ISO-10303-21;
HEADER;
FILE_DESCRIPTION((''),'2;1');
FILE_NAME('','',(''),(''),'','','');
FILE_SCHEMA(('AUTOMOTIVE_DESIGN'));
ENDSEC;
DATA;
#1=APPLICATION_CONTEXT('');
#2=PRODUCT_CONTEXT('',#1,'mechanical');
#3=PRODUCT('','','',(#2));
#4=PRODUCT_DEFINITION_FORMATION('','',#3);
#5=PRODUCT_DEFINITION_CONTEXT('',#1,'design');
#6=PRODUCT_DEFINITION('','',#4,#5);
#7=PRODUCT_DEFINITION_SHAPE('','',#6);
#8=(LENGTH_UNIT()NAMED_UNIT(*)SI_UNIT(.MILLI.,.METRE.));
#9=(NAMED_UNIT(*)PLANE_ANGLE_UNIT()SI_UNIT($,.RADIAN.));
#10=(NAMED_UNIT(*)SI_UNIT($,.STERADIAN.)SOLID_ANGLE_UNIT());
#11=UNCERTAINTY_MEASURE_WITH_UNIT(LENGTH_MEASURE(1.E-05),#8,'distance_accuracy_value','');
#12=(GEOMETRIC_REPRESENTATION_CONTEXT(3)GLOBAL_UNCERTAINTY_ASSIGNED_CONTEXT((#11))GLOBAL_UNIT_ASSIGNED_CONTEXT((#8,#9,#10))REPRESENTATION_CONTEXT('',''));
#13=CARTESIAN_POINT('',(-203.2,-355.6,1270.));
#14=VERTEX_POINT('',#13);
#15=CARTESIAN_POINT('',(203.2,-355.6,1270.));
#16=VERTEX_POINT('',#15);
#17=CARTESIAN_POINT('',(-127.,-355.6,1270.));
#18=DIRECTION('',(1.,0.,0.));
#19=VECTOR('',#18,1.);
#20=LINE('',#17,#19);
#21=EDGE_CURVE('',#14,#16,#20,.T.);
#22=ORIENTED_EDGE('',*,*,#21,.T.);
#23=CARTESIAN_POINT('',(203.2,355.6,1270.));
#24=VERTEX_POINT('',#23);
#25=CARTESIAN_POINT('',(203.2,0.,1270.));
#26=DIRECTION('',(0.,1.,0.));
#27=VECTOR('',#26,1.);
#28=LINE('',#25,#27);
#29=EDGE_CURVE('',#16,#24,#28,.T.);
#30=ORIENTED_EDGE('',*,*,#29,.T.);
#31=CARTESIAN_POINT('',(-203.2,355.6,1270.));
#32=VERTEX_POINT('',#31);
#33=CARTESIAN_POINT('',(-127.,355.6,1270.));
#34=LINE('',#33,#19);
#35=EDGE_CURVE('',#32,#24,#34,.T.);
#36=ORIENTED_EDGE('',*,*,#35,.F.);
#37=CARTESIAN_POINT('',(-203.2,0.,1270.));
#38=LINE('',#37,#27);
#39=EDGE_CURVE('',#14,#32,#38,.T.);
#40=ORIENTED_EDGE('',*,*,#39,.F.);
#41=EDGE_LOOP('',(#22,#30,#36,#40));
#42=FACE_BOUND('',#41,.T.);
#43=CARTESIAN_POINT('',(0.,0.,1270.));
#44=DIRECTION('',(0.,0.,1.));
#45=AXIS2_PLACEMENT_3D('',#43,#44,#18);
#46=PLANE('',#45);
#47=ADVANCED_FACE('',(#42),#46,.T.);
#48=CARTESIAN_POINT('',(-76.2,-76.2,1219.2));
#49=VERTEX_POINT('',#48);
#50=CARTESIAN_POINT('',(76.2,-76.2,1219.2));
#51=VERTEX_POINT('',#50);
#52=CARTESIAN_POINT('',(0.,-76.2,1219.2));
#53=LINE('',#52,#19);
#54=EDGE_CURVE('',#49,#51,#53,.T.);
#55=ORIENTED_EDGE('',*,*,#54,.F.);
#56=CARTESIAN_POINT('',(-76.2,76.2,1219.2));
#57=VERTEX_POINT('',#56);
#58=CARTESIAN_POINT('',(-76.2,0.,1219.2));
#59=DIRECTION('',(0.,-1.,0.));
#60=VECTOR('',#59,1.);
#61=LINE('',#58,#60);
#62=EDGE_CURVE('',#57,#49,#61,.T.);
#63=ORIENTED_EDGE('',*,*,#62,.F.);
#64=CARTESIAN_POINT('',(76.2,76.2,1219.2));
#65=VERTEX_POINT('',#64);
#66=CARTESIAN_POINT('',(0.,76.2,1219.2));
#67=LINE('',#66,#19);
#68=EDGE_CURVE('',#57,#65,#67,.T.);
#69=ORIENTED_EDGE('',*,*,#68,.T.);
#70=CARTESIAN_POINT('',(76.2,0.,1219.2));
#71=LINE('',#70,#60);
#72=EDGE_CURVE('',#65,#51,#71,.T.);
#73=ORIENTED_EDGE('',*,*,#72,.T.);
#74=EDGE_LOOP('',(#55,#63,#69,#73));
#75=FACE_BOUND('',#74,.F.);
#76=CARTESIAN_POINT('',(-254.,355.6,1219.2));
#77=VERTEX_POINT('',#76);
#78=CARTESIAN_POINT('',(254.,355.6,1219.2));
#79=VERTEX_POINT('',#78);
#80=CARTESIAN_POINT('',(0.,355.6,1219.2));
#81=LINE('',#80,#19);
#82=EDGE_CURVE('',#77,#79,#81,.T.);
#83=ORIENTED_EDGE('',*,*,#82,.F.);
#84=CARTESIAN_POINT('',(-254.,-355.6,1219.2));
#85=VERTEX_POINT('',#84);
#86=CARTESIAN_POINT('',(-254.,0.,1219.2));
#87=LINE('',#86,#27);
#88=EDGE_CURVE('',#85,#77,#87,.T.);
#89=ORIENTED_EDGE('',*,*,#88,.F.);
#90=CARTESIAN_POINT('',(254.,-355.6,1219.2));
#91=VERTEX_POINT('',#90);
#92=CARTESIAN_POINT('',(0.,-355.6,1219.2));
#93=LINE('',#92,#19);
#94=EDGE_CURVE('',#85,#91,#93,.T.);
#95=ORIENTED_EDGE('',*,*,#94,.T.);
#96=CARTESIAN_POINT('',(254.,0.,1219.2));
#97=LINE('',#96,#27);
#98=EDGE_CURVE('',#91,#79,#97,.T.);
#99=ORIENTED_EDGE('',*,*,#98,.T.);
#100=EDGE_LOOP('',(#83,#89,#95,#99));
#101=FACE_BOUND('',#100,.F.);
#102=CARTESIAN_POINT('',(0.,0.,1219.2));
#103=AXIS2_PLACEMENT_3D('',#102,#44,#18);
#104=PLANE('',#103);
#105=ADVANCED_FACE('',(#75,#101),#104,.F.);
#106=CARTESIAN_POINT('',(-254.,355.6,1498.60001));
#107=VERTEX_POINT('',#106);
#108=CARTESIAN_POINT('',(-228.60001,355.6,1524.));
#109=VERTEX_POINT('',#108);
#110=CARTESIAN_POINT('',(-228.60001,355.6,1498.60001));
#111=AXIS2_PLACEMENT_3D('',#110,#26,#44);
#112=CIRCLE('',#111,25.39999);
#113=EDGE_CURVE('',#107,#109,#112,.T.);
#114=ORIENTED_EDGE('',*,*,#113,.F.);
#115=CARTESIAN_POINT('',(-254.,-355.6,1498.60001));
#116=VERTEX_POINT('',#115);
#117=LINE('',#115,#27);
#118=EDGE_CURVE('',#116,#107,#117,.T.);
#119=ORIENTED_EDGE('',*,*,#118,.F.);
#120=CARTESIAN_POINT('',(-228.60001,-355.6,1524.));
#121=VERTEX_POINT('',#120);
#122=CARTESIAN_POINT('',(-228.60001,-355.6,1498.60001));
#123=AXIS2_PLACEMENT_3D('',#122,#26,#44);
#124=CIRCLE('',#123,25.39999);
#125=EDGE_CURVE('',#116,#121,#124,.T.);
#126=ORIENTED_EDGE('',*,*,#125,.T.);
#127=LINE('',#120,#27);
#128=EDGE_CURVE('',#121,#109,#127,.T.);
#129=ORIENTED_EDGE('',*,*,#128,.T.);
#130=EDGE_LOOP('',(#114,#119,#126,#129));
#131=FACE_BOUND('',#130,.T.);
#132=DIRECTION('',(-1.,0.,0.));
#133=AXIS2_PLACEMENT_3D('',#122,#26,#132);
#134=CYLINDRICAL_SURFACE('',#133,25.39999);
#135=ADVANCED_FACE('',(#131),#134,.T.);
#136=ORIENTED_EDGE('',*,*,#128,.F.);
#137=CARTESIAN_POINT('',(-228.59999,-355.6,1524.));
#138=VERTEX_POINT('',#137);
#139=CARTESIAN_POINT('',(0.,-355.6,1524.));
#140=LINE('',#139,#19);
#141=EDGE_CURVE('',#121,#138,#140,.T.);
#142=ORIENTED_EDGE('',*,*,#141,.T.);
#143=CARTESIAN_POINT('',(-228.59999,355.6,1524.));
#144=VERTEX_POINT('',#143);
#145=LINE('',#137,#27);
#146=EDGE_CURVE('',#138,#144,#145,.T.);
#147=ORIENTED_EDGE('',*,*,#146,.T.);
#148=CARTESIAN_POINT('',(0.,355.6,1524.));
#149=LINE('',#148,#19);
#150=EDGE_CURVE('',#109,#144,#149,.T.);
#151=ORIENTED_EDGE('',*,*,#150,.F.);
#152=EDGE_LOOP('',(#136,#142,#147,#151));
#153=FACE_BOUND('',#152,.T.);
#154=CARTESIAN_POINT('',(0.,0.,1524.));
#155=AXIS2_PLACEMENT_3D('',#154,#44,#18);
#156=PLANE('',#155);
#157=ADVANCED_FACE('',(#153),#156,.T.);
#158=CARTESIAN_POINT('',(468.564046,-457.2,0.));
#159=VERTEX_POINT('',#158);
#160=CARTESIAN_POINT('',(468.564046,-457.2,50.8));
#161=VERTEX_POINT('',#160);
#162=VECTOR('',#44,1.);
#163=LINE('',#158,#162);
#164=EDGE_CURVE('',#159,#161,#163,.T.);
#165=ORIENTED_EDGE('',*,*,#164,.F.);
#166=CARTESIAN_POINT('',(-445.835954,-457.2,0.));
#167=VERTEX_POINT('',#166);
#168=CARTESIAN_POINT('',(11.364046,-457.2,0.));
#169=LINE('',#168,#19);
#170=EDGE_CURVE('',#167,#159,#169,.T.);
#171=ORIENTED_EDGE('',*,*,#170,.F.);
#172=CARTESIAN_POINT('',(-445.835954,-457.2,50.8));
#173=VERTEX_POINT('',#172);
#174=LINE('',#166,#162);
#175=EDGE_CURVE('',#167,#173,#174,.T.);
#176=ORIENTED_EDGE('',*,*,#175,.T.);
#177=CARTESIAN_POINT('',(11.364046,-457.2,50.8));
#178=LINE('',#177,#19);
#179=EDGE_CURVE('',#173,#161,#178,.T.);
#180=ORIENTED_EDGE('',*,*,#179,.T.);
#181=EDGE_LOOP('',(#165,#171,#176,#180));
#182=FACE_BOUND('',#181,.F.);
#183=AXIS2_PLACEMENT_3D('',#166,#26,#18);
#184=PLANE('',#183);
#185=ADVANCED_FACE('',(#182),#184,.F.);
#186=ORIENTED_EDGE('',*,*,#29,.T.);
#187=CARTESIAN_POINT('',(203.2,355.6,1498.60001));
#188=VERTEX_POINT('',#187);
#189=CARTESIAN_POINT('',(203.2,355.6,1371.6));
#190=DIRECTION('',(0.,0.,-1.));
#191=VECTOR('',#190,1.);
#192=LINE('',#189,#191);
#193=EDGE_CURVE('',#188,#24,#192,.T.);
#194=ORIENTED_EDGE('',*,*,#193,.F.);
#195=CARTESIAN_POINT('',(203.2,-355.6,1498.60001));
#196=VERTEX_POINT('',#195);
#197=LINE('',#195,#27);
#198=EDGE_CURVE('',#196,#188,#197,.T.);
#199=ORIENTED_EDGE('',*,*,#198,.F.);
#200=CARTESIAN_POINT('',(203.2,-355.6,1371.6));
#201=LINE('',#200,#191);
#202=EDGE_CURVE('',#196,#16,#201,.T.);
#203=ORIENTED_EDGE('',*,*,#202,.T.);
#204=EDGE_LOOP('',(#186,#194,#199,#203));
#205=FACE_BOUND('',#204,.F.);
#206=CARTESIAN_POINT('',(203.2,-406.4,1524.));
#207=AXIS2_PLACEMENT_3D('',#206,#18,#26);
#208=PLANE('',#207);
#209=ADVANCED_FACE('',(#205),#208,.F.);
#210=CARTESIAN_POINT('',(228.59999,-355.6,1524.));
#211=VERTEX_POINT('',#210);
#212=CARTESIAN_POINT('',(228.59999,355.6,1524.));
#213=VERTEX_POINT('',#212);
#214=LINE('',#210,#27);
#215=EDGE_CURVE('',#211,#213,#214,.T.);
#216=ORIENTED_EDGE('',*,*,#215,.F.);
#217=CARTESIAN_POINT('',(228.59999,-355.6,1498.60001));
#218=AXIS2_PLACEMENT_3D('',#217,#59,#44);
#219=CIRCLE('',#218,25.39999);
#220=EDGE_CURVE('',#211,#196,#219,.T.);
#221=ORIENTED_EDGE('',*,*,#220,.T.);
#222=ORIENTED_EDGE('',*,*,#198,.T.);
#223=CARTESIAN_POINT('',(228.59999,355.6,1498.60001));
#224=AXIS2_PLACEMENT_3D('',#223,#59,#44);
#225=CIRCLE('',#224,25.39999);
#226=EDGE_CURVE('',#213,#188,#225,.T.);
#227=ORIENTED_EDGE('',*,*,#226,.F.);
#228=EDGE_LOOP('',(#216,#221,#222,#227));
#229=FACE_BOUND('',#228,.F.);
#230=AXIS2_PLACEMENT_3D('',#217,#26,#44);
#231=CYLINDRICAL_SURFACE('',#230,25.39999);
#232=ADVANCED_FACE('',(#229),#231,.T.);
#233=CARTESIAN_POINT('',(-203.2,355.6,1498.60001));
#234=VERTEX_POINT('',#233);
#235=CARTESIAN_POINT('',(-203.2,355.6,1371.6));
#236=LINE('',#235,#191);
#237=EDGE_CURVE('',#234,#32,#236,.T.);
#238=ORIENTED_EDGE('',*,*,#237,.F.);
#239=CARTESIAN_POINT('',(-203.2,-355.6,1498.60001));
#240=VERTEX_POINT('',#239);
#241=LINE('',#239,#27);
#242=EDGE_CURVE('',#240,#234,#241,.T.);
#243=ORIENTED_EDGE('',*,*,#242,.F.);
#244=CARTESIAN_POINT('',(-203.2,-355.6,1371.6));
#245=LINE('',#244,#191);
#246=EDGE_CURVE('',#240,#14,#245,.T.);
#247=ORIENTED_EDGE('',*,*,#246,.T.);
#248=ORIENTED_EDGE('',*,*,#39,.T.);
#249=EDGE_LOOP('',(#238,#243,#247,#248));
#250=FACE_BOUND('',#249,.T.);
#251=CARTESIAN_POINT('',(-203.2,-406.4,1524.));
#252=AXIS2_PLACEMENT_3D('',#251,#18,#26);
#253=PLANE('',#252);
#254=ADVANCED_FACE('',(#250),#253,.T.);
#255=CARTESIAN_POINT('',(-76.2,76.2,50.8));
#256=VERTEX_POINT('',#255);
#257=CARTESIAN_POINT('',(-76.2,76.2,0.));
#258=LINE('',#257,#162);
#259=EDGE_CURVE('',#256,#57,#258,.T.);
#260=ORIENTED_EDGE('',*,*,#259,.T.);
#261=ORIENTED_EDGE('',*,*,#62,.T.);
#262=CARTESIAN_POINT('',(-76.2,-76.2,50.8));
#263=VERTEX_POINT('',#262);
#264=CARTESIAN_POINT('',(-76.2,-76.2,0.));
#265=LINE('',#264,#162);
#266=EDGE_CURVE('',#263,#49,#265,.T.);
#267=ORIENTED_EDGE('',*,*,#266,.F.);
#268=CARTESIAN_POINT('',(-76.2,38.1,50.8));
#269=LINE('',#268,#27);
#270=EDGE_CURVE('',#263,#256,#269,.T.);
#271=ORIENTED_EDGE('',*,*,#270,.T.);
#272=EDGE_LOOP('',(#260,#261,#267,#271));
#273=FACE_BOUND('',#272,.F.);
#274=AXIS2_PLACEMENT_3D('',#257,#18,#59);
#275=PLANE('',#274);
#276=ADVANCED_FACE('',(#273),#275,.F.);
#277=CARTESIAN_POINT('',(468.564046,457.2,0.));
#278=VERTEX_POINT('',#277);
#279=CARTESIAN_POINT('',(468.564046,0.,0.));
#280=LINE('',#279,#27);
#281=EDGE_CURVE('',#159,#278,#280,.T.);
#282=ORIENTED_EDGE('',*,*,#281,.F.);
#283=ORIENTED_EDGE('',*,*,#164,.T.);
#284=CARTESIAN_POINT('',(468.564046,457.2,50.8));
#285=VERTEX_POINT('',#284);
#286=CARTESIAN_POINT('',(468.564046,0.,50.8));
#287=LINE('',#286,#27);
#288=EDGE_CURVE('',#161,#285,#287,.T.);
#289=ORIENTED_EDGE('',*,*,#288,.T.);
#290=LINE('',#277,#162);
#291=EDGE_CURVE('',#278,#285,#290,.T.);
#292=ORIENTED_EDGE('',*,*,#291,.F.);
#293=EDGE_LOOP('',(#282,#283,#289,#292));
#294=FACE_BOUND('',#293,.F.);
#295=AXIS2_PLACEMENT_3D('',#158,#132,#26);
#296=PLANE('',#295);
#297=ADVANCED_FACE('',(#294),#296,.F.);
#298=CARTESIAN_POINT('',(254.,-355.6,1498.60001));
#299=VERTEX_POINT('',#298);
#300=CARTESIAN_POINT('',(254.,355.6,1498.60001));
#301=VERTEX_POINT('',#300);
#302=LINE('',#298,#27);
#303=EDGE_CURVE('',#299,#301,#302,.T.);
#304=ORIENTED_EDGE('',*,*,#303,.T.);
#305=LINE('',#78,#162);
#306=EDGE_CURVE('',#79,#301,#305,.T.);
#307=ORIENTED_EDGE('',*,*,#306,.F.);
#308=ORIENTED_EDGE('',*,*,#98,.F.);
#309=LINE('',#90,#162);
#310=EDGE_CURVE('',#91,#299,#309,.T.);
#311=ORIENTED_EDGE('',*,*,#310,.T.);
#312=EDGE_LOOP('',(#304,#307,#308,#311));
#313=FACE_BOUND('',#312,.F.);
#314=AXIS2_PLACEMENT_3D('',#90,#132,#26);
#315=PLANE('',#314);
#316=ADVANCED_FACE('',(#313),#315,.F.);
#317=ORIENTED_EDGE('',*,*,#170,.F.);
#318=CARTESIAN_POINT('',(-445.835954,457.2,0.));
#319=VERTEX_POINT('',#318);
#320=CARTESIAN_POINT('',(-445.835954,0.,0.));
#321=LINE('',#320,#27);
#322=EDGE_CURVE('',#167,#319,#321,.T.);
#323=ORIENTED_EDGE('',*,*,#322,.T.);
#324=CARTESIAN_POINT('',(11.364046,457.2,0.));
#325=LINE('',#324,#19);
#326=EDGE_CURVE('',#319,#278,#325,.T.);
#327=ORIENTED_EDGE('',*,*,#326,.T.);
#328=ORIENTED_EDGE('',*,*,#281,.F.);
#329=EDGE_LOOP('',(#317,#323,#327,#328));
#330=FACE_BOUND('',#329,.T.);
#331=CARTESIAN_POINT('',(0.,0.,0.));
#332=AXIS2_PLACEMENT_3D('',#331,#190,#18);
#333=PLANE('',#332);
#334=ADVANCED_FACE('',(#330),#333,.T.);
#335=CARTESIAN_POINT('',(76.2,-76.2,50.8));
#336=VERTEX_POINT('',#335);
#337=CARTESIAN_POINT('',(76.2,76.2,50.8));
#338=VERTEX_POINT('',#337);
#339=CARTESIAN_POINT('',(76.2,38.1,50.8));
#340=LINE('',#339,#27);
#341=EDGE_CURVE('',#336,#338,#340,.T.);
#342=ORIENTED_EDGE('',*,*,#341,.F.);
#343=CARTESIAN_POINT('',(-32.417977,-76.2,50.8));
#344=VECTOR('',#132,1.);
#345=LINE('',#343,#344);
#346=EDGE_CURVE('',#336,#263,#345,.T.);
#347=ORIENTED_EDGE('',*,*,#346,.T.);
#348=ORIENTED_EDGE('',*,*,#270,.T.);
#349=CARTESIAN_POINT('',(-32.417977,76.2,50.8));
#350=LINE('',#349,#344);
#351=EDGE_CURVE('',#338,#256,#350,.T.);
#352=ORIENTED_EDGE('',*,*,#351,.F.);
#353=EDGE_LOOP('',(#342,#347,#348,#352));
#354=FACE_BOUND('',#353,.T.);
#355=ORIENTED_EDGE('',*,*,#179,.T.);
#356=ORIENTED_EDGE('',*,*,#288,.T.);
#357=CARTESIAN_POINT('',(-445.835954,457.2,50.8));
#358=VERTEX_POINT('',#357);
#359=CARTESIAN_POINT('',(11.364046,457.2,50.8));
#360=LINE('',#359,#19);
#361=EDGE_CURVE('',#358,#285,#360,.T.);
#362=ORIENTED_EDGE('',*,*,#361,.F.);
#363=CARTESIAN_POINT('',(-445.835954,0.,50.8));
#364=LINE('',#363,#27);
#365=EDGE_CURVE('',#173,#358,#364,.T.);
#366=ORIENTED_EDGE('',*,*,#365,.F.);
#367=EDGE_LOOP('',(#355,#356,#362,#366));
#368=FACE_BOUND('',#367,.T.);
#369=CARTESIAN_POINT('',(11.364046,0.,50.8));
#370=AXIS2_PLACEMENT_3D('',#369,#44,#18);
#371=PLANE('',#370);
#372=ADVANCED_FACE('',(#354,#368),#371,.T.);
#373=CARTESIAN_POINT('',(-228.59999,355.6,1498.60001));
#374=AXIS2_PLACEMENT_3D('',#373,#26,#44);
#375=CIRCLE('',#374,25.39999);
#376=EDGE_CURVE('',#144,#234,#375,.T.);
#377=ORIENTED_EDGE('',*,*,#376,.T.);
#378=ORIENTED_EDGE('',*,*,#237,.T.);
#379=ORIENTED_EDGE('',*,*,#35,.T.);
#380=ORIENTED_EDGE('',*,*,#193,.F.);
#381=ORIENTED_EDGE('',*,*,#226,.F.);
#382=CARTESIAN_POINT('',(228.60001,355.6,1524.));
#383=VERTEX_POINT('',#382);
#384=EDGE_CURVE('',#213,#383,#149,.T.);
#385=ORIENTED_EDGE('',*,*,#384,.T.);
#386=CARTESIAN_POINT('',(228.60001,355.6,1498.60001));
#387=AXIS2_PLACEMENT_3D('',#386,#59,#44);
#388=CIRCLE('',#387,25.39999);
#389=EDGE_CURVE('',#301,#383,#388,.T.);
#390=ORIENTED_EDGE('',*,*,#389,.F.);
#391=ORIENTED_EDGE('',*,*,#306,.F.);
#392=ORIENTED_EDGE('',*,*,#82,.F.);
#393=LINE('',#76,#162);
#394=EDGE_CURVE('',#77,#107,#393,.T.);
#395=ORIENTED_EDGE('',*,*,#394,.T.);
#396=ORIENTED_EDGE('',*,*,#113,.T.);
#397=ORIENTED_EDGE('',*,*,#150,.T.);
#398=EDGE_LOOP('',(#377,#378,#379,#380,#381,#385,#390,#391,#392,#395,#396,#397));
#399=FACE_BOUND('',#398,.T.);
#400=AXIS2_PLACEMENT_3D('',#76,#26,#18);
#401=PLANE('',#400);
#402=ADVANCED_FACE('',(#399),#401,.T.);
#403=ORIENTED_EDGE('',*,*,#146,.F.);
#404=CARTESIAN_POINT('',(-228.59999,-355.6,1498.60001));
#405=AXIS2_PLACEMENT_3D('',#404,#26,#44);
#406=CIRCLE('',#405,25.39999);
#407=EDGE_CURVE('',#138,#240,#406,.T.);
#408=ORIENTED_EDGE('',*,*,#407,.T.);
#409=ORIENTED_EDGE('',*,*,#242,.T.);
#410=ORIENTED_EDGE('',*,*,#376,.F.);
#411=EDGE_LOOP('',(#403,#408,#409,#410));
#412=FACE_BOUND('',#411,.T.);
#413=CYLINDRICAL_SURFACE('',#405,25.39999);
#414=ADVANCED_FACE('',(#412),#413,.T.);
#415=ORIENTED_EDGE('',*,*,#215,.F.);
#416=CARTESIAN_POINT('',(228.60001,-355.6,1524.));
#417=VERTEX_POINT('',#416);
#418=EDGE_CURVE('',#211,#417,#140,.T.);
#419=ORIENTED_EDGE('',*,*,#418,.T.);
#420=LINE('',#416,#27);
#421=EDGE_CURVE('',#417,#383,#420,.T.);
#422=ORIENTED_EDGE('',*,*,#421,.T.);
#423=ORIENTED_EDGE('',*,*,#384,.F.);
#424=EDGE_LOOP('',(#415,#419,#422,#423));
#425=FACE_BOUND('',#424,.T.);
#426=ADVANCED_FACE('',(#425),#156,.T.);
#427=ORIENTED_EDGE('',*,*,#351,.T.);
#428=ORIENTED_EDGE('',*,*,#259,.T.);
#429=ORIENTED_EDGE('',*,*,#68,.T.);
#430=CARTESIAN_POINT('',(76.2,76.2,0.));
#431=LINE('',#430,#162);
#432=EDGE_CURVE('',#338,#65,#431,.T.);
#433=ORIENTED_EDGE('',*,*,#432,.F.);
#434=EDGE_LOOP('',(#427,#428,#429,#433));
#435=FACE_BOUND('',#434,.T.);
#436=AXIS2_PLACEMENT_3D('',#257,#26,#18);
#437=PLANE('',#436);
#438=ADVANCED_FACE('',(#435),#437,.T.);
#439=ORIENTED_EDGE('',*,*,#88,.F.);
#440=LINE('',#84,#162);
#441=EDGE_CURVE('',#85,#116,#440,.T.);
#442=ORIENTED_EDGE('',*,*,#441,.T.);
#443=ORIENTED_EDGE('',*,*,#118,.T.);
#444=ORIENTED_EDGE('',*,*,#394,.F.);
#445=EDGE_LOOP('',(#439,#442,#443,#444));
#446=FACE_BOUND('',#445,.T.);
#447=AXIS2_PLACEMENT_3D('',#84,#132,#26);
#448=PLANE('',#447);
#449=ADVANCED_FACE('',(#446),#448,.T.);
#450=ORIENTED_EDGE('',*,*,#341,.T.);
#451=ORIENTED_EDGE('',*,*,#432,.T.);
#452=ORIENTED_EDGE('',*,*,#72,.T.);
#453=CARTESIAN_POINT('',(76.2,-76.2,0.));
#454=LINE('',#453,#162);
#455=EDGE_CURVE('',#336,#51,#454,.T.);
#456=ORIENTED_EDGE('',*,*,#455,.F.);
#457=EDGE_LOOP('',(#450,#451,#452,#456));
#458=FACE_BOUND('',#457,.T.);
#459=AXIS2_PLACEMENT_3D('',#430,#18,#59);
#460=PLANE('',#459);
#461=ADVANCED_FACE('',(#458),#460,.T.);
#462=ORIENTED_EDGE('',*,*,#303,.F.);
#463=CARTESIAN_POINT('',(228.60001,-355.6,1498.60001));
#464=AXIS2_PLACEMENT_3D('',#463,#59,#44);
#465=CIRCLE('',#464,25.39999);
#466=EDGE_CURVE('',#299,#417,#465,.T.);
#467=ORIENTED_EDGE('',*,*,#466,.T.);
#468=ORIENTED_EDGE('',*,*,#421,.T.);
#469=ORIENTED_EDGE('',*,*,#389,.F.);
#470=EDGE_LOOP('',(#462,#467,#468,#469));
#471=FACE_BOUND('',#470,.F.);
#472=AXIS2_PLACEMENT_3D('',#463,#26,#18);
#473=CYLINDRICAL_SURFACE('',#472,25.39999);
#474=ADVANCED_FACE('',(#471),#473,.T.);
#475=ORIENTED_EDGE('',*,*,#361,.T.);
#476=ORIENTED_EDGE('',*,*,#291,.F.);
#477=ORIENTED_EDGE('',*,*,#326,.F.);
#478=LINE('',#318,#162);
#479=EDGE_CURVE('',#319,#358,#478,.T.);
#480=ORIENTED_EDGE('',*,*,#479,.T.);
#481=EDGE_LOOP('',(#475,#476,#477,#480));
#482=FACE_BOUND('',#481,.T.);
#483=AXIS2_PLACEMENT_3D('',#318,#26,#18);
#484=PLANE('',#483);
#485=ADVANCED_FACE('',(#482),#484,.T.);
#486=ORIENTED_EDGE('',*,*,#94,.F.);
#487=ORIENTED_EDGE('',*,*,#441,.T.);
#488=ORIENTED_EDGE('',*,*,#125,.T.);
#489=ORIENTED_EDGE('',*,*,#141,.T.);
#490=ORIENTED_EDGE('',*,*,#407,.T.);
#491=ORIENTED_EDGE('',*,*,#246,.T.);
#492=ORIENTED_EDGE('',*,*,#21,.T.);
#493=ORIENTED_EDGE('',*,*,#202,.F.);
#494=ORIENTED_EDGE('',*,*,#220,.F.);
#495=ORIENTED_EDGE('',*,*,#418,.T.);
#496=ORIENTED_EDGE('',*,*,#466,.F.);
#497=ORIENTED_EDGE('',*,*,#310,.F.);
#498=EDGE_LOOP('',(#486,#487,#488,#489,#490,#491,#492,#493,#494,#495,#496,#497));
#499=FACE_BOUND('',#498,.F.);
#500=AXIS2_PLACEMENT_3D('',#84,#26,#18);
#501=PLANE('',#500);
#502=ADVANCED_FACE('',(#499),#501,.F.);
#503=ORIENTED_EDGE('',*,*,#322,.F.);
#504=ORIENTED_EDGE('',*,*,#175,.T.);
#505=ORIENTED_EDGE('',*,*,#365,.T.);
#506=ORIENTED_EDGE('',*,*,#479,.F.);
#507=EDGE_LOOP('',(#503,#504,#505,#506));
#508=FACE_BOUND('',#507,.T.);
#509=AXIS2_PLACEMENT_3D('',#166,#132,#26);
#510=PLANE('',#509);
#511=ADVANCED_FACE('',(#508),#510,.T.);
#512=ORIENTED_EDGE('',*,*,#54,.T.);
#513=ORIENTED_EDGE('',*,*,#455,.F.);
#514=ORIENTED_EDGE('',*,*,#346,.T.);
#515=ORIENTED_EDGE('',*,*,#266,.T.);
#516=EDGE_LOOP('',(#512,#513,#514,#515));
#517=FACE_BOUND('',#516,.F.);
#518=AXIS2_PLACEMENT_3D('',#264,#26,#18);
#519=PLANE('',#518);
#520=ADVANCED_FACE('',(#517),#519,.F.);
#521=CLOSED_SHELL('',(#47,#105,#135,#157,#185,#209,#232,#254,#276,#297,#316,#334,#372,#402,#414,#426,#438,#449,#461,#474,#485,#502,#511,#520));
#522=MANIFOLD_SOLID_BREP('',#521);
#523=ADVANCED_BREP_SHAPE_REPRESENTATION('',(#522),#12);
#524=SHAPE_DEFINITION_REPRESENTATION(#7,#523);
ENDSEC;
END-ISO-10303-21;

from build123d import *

# Parameters (mm, degrees)
F0_W     = 914.4
F0_H     = 914.4
F1_DEPTH = 50.8
F2_W     = 152.4
F2_H     = 152.4
F3_DEPTH = 1219.2
F4_W     = 508
F4_H     = 711.2
F5_DEPTH = 304.8
F6_W     = 406.4
F6_H     = 812.8
F7_DEPTH = 254
F8_R     = 25.39999


# Not quite as in the source:
# - a fillet or chamfer is up to 0.001 mm smaller than in the source, because OpenCascade refuses the exact size
# - a feature names something its author has since deleted; it is built from what else it names


with BuildPart() as f1:
    # F0 (on Top) → F1 (new body)
    with BuildSketch(Plane.XY):
        with Locations((11.3640455229, 0)):
            Rectangle(F0_W, F0_H)
    extrude(amount=F1_DEPTH)

    # F2 (on face) → F3 (join)
    with BuildSketch(Plane(origin=(0, 0, 0), x_dir=(1, 0, 0), z_dir=(0, 0, -1))):
        Rectangle(F2_W, F2_H)
    extrude(amount=-F3_DEPTH)

    # F4 (on face) → F5 (join)
    with BuildSketch(Plane.XY.offset(1219.2)):
        Rectangle(F4_W, F4_H)
    extrude(amount=F5_DEPTH)

    # F6 (on face) → F7 (cut)
    with BuildSketch(Plane.XY.offset(1524)):
        Rectangle(F6_W, F6_H)
    extrude(amount=-F7_DEPTH, mode=Mode.SUBTRACT)

    # F8 (radius 25.4 in the source; OpenCascade refuses exactly that, so slightly less here)
    f8_edges = [f1.edges().sort_by_distance(p)[0] for p in [
        (-254, 0, 1524),
        (-203.2, 0, 1524),
        (203.2, 0, 1524),
        (254, 0, 1524),
    ]]
    fillet(f8_edges, radius=F8_R)


solid = f1.part
